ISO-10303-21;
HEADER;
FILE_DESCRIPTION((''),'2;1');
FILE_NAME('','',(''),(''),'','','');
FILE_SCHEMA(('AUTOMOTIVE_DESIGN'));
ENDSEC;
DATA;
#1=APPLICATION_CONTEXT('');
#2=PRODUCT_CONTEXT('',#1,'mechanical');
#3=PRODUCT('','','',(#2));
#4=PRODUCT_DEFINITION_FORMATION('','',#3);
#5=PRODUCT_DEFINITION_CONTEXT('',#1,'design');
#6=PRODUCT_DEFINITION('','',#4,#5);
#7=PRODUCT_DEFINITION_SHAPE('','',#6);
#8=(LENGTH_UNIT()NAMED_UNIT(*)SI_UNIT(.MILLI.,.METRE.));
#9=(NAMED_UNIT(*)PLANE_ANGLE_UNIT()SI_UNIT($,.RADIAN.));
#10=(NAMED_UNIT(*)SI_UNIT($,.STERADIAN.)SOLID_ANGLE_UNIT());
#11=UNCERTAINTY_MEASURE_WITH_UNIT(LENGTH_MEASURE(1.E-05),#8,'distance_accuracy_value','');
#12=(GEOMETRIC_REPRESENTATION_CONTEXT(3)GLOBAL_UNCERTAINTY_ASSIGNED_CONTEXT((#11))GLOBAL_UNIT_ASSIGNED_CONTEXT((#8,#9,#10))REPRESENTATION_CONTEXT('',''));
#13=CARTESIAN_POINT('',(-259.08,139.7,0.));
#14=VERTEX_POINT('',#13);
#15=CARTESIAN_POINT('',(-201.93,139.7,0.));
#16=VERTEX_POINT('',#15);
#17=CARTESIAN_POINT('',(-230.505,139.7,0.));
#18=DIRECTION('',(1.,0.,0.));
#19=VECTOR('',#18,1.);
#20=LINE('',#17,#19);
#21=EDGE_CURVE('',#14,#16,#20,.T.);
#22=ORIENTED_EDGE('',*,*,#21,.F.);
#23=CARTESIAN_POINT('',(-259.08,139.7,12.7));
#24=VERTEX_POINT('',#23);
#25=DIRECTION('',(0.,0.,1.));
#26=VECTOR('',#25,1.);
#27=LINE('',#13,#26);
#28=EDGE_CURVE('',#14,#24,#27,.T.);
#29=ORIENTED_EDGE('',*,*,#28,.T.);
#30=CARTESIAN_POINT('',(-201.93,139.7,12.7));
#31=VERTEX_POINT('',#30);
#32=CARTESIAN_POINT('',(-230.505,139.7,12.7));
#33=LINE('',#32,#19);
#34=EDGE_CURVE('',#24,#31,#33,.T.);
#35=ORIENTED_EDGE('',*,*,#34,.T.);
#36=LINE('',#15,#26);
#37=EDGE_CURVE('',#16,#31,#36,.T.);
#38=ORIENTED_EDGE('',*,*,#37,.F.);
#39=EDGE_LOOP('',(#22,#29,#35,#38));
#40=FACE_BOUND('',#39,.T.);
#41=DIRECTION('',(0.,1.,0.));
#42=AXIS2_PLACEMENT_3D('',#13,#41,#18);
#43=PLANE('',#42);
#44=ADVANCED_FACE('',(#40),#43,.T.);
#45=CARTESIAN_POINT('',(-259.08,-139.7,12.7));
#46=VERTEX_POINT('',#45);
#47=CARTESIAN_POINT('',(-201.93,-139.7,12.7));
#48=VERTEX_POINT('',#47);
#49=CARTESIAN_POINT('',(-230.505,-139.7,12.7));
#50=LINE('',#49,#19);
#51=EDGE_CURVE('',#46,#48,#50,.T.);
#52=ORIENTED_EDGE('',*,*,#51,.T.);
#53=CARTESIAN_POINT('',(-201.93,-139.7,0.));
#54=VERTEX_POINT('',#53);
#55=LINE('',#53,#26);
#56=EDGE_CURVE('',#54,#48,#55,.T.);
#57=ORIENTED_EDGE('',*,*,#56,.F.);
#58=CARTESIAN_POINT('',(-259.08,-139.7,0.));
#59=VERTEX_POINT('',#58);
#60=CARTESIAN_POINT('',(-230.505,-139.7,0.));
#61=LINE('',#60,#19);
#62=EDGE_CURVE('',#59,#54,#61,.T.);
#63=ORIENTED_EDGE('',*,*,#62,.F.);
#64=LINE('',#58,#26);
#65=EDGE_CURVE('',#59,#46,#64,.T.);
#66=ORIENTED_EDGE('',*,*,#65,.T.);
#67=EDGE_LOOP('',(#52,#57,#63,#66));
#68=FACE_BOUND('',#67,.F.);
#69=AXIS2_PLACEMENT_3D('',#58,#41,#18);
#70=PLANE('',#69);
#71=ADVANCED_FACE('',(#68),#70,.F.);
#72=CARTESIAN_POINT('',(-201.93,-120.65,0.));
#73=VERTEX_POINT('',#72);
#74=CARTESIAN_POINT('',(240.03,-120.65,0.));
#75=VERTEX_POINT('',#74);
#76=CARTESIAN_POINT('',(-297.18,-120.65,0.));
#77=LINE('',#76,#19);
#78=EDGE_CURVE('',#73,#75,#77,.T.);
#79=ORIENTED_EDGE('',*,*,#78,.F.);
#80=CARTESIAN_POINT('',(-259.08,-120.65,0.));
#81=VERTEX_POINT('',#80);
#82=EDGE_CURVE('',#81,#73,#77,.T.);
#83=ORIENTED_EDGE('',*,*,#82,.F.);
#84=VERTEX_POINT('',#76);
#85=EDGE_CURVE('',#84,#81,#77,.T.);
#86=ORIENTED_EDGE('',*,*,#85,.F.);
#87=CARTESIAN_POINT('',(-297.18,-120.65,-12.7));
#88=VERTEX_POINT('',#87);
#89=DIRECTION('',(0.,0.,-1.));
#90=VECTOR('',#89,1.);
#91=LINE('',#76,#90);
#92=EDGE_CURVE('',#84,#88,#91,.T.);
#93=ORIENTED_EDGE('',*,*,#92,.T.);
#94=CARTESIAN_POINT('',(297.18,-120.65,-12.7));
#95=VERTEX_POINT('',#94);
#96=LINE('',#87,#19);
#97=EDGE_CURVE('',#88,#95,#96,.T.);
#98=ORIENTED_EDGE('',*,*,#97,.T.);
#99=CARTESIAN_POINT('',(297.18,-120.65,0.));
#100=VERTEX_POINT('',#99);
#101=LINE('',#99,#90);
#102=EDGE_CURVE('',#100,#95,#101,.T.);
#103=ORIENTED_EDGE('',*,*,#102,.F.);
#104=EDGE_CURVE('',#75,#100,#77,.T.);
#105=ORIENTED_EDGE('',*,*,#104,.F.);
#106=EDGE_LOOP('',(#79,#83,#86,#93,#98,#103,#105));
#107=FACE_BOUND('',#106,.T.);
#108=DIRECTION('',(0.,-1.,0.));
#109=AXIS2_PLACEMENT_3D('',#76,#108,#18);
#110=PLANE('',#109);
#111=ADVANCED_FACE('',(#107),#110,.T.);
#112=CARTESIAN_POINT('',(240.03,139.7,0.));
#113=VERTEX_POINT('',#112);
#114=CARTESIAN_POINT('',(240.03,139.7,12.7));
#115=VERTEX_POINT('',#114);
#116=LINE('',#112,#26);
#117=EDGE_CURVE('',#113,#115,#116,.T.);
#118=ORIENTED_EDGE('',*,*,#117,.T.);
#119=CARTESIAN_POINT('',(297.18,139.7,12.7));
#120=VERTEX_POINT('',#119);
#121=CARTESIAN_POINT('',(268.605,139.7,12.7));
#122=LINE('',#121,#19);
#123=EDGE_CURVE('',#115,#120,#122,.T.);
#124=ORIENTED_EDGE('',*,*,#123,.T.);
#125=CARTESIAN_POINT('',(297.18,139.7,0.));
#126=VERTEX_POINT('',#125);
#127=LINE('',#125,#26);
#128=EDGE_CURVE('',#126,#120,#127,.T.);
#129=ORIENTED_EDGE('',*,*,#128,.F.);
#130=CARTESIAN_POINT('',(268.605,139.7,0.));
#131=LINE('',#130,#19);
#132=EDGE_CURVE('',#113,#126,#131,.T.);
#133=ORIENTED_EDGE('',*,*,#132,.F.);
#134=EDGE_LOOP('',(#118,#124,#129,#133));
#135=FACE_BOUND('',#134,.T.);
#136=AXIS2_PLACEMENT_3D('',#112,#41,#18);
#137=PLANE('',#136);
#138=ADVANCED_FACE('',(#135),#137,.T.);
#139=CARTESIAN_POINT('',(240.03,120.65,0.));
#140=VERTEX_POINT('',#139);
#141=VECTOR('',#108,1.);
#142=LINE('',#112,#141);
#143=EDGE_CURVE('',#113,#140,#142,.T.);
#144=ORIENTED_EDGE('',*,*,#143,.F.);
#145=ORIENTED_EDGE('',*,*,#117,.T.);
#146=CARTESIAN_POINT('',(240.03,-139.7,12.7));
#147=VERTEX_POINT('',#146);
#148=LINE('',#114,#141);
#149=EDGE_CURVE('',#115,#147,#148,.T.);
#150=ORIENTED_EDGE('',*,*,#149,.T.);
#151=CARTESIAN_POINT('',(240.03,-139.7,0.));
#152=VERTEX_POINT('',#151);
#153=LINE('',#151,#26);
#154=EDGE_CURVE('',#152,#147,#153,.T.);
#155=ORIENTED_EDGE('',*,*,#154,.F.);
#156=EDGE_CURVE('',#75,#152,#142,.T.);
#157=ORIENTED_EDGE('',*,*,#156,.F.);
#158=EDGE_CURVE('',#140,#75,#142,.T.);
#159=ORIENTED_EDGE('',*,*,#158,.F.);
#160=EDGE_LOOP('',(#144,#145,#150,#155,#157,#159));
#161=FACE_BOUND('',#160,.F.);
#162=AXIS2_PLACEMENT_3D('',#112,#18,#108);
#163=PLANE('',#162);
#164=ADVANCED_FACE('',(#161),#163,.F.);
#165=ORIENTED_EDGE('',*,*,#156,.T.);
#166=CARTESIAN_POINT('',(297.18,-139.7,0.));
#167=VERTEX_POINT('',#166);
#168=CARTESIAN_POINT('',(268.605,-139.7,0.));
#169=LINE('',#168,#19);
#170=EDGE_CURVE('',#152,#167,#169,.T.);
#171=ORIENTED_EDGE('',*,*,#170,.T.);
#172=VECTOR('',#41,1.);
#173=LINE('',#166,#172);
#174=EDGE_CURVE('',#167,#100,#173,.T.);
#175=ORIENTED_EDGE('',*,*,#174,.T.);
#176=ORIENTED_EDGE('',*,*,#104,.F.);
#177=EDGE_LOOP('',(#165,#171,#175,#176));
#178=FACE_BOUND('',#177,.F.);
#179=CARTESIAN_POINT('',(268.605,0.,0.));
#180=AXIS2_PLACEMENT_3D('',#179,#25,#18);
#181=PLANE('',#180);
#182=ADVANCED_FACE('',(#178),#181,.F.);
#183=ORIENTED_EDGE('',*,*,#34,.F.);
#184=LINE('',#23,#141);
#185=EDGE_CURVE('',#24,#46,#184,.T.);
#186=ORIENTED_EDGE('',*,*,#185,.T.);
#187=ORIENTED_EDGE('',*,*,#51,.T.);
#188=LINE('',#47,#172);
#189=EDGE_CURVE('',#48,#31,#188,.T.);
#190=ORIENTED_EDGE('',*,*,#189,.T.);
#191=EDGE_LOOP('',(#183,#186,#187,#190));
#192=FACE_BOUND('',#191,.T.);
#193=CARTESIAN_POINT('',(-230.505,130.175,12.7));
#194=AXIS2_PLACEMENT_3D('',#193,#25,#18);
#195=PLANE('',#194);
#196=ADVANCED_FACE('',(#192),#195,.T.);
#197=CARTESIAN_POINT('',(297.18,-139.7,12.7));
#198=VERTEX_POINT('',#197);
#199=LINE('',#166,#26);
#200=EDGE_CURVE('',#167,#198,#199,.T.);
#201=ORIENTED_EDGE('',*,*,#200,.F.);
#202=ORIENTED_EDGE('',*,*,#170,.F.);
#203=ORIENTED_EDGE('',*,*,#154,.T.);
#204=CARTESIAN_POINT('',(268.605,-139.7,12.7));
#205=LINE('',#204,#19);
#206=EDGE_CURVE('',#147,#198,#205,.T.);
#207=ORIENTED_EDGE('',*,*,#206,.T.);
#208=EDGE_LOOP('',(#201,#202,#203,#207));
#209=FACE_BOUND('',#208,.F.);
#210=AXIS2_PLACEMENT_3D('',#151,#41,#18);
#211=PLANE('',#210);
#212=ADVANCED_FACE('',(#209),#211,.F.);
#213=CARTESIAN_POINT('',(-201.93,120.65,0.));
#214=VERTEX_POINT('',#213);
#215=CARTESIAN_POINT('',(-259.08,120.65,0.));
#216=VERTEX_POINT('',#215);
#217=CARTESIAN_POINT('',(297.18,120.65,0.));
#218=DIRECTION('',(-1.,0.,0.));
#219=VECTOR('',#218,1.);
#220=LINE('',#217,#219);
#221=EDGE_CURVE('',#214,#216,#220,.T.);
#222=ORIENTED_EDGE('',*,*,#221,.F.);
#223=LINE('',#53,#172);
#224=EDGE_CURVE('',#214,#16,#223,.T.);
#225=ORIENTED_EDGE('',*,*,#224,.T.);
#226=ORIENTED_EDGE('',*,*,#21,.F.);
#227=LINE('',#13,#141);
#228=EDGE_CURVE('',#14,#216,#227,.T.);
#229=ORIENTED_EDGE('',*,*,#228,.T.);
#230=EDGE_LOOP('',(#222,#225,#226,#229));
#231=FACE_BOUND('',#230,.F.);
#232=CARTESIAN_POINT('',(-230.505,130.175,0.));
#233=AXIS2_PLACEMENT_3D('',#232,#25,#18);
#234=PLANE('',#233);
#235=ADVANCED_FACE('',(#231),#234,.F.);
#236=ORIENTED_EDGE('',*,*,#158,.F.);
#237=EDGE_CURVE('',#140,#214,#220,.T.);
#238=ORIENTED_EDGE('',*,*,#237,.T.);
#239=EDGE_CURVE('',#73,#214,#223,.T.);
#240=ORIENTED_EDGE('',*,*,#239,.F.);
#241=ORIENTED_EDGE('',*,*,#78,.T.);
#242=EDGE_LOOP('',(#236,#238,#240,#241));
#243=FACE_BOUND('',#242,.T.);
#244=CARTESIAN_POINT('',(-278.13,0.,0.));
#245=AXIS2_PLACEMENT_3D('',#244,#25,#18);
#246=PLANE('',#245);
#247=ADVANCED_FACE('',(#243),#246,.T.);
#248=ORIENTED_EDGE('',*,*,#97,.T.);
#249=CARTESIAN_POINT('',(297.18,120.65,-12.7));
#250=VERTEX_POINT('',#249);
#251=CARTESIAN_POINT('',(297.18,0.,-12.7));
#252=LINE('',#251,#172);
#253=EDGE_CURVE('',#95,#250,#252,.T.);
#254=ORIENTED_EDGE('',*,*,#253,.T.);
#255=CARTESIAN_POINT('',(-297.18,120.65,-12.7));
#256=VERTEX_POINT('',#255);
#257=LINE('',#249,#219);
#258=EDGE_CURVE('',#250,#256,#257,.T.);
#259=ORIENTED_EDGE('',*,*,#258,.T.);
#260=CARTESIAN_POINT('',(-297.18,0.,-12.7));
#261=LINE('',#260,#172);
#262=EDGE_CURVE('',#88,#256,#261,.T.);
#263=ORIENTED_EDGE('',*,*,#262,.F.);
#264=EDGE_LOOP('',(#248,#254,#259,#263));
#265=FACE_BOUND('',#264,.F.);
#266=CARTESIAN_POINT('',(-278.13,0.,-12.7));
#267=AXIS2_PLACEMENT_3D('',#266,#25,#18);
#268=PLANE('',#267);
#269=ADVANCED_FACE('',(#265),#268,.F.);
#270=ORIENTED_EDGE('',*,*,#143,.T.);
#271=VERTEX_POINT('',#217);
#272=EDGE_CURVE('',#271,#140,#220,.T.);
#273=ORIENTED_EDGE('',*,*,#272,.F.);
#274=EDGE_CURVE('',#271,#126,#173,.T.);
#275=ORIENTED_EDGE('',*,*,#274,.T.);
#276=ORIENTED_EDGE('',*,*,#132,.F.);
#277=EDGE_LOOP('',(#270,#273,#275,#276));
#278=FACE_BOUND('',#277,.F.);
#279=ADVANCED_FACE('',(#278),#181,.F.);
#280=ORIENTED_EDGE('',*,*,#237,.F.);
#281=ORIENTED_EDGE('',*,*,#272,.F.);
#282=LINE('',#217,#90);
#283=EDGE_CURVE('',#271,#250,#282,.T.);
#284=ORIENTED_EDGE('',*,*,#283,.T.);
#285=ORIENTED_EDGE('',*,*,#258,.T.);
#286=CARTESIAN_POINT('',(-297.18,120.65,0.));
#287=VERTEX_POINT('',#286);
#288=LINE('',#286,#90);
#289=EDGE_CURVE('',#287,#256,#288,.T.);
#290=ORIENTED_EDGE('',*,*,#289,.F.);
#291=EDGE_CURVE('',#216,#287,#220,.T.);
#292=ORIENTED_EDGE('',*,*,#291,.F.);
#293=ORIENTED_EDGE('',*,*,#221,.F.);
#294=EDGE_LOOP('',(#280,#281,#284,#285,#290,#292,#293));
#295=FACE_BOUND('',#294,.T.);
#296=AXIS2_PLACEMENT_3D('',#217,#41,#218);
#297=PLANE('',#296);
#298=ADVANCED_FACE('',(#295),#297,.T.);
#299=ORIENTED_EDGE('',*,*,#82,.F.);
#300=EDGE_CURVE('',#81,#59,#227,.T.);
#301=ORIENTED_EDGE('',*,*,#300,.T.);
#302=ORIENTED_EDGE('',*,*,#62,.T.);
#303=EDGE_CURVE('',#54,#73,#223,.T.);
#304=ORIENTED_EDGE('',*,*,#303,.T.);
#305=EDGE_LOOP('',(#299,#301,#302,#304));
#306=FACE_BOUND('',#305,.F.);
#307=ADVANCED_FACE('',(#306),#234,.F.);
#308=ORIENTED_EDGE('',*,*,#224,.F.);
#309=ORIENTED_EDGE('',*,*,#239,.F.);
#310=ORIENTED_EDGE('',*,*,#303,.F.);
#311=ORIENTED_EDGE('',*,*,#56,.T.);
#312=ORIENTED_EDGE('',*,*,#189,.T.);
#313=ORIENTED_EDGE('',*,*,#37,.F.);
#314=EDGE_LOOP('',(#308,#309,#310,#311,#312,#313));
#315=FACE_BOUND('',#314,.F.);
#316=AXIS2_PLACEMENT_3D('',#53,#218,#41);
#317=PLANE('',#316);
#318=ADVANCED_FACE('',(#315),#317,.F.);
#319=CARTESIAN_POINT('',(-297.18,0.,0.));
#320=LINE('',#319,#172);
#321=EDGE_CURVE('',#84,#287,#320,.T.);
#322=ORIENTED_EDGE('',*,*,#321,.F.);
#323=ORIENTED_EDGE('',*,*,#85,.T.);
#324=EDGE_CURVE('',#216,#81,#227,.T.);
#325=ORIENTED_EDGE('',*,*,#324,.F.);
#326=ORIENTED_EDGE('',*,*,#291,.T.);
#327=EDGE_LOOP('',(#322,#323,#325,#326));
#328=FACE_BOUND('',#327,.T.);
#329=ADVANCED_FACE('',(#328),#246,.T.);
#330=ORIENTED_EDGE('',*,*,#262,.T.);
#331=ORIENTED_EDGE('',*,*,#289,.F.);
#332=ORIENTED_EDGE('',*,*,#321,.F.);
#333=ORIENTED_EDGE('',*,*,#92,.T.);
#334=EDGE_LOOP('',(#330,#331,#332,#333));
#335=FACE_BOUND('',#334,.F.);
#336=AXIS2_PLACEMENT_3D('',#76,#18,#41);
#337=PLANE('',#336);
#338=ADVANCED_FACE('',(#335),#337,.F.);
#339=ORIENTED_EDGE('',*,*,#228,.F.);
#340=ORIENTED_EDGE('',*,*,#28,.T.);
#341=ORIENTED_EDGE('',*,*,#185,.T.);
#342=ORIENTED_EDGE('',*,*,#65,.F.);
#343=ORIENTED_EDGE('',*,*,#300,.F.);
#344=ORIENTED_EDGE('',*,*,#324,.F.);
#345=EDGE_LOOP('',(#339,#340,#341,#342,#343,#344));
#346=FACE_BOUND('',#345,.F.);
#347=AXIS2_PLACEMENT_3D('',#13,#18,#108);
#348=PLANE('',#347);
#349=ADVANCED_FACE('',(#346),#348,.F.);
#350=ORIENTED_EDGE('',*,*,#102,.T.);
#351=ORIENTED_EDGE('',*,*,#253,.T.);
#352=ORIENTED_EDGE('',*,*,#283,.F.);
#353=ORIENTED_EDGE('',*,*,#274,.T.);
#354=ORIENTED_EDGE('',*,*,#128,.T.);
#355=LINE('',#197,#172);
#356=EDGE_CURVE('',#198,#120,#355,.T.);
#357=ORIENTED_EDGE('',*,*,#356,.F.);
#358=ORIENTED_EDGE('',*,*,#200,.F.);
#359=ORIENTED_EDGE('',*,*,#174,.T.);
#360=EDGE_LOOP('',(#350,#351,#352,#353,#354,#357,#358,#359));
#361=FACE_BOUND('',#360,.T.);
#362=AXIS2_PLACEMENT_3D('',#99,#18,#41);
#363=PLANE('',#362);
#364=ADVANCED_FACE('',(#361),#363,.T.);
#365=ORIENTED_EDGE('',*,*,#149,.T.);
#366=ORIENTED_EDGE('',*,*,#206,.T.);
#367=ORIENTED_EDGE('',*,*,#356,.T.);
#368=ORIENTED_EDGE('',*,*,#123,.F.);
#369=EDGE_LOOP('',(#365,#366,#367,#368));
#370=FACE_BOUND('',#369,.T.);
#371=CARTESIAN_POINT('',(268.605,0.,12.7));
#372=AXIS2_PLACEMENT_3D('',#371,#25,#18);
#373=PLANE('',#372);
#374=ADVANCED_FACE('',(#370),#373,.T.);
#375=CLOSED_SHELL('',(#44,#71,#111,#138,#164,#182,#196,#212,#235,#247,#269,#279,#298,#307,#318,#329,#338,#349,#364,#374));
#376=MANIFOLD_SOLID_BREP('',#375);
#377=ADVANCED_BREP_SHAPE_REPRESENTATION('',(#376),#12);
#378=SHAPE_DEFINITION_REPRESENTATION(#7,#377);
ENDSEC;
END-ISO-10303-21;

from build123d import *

# Parameters (mm, degrees)
F0_W     = 38.1
F0_H     = 241.3
F0_W_2   = 57.15
F0_W_3   = 441.96
F1_DEPTH = 12.7
F0_H_2   = 19.05
F2_DEPTH = 12.7


# Not quite as in the source:
# - a feature names something its author has since deleted; it is built from what else it names


with BuildPart() as f1:
    # F0 (on Top) → F1 (new body)
    with BuildSketch(Plane.XY):
        with Locations((-278.13, 0)):
            Rectangle(F0_W, F0_H)
        with Locations((-230.505, 0)):
            Rectangle(F0_W_2, F0_H)
        with Locations((19.05, 0)):
            Rectangle(F0_W_3, F0_H)
        with Locations((268.605, 0)):
            Rectangle(F0_W_2, F0_H)
    extrude(amount=-F1_DEPTH)

    # F0 (on Top) → F2 (join)
    with BuildSketch(Plane.XY):
        with Locations((-230.505, 130.175)):
            Rectangle(F0_W_2, F0_H_2)
        with Locations((-230.505, -130.175)):
            Rectangle(F0_W_2, F0_H_2)
        with Locations((-230.505, 0)):
            Rectangle(F0_W_2, F0_H)
        with Locations((268.605, 0)):
            Rectangle(F0_W_2, F0_H)
        with Locations((268.605, -130.175)):
            Rectangle(F0_W_2, F0_H_2)
        with Locations((268.605, 130.175)):
            Rectangle(F0_W_2, F0_H_2)
    extrude(amount=F2_DEPTH)


solid = f1.part
